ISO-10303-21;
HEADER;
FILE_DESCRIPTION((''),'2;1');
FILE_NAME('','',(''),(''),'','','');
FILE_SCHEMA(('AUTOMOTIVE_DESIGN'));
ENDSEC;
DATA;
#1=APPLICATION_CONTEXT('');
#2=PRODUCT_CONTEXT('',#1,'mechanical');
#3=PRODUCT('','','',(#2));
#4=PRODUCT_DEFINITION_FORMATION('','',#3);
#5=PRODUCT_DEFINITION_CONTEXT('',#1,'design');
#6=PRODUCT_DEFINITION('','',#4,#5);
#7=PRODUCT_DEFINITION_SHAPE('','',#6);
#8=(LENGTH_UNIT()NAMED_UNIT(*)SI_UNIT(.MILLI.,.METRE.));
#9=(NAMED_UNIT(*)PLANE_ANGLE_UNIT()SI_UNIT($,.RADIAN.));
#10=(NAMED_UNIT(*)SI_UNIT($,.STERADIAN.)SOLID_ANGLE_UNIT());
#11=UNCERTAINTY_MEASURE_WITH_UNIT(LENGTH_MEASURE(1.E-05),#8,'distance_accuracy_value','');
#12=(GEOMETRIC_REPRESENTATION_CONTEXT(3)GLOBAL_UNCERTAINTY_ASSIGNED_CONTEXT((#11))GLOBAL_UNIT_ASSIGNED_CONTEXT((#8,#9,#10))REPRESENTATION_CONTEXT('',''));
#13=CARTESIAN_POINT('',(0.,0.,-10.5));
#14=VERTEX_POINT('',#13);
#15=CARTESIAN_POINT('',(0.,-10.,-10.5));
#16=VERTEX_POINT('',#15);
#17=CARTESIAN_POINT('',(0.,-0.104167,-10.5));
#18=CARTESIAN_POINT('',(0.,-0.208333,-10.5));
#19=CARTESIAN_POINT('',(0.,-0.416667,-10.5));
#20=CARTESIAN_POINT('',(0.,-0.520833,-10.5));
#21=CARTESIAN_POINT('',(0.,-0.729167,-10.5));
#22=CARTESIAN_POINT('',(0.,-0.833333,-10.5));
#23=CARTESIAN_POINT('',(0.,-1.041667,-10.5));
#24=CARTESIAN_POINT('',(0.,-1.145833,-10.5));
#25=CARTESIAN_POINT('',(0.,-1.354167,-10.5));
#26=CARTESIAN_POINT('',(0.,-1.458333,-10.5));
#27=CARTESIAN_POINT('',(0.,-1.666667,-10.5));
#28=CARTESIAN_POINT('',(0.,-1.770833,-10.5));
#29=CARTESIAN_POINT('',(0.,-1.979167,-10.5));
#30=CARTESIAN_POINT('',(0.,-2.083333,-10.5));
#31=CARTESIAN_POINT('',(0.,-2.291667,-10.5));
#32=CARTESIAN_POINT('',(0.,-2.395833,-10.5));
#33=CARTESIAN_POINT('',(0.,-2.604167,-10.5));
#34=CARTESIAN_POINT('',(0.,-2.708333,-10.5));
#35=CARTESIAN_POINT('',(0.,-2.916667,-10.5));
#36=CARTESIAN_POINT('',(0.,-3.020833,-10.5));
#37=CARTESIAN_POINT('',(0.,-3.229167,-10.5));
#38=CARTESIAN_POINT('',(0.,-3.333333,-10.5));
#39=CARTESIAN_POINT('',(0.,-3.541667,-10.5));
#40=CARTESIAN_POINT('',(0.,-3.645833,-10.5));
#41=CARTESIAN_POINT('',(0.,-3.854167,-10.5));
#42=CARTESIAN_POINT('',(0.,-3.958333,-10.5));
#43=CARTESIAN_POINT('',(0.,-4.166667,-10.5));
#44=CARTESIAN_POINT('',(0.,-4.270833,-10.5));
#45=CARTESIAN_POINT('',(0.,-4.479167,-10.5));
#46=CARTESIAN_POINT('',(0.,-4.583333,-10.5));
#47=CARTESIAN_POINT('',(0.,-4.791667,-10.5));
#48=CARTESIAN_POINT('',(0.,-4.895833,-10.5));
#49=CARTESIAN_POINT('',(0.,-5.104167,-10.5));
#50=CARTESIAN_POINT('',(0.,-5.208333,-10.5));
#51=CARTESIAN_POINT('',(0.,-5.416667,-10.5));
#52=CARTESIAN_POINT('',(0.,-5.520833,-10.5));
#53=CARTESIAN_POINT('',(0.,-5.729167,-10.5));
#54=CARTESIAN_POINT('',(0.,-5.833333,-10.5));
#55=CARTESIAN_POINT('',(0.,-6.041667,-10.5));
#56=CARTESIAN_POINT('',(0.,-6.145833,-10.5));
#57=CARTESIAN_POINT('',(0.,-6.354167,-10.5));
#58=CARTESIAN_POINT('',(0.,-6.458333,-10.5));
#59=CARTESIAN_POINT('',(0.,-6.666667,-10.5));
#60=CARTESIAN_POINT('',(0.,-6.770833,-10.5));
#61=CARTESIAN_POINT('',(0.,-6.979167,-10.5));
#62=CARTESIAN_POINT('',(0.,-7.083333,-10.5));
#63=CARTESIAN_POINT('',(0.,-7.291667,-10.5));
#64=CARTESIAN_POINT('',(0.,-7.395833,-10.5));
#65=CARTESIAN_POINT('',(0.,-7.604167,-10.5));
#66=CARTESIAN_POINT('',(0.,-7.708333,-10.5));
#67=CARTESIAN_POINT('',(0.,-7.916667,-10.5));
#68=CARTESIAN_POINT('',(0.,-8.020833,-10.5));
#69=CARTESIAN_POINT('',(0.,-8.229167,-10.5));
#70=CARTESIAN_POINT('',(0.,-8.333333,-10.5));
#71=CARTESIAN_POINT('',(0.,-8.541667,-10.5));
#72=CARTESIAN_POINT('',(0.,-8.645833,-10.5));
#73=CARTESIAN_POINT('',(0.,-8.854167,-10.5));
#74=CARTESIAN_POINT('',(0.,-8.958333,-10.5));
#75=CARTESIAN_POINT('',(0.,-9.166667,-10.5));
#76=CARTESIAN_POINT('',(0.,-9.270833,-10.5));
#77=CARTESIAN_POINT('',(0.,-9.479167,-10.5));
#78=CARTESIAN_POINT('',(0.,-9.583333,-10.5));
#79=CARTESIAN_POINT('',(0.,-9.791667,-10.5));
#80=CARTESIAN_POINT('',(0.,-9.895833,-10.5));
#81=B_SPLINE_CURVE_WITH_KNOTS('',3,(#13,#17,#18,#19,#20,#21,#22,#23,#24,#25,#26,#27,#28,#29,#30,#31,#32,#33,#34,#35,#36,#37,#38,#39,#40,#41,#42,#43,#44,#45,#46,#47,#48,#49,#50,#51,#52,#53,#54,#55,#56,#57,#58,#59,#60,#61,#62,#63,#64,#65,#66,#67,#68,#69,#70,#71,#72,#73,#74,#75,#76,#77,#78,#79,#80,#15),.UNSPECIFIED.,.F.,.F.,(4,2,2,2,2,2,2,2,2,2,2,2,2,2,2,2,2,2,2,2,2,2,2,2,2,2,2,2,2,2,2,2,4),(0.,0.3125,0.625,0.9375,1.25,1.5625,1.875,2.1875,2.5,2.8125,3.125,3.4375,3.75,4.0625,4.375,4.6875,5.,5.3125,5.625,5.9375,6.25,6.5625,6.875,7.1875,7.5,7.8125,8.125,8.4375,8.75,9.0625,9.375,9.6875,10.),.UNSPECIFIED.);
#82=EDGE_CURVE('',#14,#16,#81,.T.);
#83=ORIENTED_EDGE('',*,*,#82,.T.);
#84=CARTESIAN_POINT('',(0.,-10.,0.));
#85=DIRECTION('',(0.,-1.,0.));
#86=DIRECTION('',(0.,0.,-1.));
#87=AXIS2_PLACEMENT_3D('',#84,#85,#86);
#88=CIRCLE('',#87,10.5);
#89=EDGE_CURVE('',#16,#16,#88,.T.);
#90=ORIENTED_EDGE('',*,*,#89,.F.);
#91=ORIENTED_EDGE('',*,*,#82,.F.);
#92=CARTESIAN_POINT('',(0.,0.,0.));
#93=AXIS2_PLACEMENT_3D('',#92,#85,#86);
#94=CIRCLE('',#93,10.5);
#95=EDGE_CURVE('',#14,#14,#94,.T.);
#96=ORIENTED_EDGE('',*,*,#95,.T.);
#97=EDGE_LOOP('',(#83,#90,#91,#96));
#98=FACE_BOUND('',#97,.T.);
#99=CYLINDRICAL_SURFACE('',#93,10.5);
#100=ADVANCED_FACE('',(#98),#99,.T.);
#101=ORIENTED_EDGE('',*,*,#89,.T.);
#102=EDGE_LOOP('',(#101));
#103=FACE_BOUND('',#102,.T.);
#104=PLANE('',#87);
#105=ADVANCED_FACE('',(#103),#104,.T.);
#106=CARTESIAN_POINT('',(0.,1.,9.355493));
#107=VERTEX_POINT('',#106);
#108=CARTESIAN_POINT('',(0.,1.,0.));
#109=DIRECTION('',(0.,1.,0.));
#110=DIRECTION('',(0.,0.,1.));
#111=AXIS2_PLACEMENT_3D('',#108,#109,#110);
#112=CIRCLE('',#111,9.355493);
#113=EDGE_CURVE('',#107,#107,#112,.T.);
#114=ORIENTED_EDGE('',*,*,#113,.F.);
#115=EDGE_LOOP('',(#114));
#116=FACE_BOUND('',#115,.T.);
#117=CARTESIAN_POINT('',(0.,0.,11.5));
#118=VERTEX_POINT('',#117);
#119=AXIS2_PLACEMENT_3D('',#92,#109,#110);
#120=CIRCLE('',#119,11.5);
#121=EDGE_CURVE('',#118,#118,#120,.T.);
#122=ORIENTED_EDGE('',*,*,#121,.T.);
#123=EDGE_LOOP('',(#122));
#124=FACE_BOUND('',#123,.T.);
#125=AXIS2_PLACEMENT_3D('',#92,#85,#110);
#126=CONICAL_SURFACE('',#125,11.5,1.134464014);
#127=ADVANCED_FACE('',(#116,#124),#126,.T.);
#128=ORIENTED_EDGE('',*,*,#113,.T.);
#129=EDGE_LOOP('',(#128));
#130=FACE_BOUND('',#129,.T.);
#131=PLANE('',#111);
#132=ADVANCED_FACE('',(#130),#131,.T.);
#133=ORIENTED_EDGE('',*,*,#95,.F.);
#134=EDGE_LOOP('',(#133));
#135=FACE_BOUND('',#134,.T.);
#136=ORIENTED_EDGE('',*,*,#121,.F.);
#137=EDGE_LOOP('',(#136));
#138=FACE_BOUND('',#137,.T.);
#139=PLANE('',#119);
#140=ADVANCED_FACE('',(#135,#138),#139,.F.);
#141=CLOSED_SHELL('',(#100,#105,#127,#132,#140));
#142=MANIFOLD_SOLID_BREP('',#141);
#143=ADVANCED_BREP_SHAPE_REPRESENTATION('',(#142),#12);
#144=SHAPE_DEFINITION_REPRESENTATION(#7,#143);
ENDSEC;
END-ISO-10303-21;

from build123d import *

# Parameters (mm, degrees)
SKETCH1_R               = 11.5
BOSS_EXTRUDE3_DEPTH     = 1
BOSS_EXTRUDE3_TAPER     = 65
BOSS_EXTRUDE5_START     = -10
BOSS_EXTRUDE5_OUTLINE_R = 10.5
BOSS_EXTRUDE5_DEPTH     = 10


# Read off the part's stored shape, not the designer's step: Boss-Extrude5
with BuildPart() as part:
    # Sketch1 → Boss-Extrude3 (new body)
    with BuildSketch(Plane(origin=(0, 0, 0), x_dir=(1, 0, 0), z_dir=(0, 1, 0))):
        Circle(SKETCH1_R)
    extrude(amount=BOSS_EXTRUDE3_DEPTH, taper=BOSS_EXTRUDE3_TAPER)

    # Boss-Extrude5 outline → Boss-Extrude5 (add)
    with BuildSketch(Plane(origin=(0, 0, 0), x_dir=(1, 0, 0), z_dir=(0, 1, 0)).offset(BOSS_EXTRUDE5_START)):
        Circle(BOSS_EXTRUDE5_OUTLINE_R)
    extrude(amount=BOSS_EXTRUDE5_DEPTH)


solid = part.part
